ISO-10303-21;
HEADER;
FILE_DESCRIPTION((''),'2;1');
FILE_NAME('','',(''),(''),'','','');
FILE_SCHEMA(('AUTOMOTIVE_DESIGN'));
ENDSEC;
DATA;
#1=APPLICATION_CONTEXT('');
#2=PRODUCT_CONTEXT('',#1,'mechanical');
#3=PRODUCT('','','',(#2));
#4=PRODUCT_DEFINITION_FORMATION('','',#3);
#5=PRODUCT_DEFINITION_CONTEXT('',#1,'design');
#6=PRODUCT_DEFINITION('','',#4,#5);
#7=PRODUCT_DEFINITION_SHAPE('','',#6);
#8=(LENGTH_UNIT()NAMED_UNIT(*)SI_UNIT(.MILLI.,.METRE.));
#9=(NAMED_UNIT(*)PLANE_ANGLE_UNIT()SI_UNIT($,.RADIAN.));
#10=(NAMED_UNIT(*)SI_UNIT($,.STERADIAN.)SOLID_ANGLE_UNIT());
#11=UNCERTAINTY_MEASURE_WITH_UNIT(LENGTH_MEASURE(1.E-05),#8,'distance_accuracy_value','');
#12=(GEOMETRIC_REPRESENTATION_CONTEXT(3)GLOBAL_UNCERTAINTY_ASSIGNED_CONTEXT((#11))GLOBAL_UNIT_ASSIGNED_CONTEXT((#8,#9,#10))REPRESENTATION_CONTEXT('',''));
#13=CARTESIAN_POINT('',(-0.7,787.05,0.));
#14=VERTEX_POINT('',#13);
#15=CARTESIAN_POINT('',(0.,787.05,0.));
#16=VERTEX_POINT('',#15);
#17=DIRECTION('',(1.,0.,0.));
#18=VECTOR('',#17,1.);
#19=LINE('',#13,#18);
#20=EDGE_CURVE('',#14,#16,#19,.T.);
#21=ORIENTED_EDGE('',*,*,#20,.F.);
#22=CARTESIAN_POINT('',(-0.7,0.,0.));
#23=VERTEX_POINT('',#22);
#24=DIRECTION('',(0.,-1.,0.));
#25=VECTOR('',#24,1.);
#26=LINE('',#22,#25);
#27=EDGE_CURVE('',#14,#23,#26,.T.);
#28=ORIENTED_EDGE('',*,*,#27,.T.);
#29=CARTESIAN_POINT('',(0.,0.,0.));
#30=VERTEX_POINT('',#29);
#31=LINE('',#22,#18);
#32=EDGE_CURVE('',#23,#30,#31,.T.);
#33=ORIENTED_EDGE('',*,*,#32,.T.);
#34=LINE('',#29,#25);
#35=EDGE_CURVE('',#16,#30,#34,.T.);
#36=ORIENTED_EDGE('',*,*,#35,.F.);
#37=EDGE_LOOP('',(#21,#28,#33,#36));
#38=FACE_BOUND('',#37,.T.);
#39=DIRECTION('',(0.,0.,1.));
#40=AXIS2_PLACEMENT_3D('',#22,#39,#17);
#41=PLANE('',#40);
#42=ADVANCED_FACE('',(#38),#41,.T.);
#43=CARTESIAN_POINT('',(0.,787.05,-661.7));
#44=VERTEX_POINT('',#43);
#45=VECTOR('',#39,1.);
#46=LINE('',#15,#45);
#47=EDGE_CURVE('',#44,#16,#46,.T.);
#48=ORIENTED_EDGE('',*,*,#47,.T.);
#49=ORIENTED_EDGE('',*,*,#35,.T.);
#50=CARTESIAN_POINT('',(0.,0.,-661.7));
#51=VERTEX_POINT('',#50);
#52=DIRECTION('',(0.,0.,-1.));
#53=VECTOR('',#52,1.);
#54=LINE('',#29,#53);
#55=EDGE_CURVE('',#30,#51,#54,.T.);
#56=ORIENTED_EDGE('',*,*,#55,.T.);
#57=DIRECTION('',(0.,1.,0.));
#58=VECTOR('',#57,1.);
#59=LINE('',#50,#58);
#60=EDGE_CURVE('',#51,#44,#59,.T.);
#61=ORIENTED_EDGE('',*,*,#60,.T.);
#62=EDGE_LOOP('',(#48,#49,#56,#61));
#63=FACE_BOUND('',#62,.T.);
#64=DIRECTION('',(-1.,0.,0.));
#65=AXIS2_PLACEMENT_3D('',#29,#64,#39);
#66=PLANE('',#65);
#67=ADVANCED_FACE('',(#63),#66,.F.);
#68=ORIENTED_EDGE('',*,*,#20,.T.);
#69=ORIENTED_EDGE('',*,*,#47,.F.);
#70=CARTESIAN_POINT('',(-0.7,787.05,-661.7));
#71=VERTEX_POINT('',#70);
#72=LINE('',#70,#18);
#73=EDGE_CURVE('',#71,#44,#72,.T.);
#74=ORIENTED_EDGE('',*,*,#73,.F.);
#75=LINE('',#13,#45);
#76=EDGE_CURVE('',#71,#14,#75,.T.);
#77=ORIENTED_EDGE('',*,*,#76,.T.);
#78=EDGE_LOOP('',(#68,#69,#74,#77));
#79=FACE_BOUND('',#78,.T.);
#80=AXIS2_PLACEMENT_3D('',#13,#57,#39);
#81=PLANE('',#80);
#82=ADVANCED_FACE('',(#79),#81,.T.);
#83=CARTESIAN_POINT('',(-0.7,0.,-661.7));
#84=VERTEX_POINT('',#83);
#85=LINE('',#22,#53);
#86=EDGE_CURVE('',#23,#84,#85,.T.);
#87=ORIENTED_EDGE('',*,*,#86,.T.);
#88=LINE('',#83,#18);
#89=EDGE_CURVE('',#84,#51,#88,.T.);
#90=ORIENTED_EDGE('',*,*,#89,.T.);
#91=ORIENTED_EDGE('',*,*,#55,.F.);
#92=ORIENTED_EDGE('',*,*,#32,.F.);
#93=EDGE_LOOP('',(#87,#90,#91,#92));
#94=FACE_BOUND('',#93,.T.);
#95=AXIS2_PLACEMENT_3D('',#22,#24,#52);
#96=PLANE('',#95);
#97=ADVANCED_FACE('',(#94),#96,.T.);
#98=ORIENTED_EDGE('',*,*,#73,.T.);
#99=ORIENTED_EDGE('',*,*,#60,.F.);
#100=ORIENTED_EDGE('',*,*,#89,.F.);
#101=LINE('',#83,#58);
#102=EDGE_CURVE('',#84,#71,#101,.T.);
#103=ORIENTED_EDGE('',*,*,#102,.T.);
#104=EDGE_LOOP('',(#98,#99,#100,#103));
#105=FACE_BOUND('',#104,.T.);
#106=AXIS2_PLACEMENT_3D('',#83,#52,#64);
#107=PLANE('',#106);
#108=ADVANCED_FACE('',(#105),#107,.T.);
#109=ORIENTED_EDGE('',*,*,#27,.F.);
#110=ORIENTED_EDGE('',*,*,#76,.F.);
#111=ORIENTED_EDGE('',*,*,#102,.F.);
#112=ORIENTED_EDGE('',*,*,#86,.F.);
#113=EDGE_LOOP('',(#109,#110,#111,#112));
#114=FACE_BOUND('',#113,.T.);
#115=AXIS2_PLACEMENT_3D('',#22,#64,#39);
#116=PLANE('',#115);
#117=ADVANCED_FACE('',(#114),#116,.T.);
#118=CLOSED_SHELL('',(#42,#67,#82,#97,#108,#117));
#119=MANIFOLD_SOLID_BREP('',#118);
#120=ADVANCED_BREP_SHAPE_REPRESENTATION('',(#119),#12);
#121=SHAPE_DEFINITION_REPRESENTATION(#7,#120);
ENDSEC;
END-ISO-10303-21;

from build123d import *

# Parameters (mm, degrees)
SKETCH1_W          = 661.7
SKETCH1_H          = 787.05
BASE_FLANGE1_DEPTH = 0.7


# Sheet-metal steps are written as plain solids
with BuildPart() as part:
    # Sketch1 → Base-Flange1 (new body)
    with BuildSketch(Plane(origin=(0, 0, 0), x_dir=(0, 0, -1), z_dir=(1, 0, 0))):
        with Locations((330.85, 393.525)):
            Rectangle(SKETCH1_W, SKETCH1_H)
    extrude(amount=-BASE_FLANGE1_DEPTH)


solid = part.part
